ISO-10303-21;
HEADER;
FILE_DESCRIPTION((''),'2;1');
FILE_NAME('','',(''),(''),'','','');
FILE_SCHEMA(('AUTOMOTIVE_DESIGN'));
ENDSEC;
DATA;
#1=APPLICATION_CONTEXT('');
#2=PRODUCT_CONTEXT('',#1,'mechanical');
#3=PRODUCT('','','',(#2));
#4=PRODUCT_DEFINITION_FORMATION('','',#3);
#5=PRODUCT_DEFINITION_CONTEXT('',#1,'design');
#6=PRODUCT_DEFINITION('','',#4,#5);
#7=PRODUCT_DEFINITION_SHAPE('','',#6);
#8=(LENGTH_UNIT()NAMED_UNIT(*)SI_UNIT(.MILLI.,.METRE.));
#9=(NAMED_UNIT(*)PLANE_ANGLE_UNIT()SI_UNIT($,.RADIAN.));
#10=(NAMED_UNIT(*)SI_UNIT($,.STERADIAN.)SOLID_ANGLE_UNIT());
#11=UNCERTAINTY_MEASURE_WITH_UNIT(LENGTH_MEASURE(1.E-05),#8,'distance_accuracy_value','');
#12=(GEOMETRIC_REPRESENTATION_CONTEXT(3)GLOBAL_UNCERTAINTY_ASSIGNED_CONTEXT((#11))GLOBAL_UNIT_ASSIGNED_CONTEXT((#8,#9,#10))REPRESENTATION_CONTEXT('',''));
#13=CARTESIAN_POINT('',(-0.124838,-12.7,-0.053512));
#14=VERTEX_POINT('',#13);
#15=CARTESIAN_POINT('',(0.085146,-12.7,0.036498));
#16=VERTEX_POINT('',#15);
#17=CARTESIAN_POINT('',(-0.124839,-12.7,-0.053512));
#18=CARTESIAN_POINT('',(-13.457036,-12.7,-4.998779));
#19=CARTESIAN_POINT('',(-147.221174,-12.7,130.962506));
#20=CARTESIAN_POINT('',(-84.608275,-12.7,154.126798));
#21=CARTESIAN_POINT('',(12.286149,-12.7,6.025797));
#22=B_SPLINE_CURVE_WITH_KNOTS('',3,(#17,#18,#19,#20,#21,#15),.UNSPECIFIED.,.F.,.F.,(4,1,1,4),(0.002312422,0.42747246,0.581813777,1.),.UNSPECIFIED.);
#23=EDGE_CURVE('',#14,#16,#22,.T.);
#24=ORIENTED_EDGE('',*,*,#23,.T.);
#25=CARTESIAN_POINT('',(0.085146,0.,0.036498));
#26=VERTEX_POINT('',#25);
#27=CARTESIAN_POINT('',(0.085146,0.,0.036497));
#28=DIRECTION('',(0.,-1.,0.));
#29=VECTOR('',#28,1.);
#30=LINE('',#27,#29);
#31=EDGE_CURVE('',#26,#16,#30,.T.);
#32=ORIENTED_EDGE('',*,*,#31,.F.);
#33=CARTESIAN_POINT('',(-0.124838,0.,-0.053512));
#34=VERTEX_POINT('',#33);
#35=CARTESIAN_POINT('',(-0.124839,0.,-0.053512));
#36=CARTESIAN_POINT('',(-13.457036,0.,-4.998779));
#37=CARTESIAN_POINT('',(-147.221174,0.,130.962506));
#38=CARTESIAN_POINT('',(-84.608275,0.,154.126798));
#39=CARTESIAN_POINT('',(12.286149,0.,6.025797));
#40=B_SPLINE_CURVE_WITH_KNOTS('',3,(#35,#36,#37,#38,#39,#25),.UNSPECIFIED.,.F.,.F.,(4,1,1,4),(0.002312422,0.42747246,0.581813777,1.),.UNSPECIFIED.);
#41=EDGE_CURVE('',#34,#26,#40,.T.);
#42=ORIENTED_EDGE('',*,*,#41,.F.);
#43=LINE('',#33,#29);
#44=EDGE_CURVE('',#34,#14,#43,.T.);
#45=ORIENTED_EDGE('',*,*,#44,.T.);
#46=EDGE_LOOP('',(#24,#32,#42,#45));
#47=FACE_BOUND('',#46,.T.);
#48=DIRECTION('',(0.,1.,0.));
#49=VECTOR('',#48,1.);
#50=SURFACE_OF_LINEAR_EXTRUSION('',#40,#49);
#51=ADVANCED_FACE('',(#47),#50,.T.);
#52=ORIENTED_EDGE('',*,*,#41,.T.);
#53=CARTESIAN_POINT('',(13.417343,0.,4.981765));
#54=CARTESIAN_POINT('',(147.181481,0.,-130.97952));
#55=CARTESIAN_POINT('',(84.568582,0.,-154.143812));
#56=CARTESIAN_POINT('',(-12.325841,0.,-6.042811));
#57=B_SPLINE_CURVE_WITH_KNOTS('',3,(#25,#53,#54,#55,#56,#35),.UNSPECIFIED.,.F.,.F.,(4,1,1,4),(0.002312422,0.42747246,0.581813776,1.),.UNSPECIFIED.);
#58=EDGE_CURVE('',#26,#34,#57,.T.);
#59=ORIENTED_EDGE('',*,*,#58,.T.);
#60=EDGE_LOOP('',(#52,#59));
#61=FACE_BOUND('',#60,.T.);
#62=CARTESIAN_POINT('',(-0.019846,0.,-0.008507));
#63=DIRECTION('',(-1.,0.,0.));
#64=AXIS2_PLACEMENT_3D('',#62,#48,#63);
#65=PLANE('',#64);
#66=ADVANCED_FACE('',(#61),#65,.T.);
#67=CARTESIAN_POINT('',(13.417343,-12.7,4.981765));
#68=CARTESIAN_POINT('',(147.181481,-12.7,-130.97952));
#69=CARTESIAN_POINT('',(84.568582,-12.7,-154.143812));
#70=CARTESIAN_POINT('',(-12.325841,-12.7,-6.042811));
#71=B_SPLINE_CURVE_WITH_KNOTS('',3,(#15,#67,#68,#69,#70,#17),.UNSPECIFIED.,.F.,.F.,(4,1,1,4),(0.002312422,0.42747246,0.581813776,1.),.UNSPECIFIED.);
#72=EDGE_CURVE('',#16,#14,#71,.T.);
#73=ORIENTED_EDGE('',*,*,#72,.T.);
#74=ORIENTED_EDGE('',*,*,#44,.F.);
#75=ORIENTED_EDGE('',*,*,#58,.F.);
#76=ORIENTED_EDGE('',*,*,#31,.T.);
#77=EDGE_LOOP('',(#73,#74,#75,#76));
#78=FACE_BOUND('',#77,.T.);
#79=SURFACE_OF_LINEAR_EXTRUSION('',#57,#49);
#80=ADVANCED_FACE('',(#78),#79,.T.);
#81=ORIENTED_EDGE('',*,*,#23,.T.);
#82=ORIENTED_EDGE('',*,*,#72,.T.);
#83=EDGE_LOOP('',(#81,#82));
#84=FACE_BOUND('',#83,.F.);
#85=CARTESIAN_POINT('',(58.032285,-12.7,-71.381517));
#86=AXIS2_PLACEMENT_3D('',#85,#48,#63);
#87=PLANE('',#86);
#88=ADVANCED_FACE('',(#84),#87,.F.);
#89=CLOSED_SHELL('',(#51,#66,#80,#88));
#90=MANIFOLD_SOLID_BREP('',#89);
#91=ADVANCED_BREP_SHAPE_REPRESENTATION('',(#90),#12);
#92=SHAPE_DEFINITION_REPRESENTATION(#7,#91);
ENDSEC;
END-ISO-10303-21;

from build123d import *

# Parameters (mm, degrees)
F1_DEPTH = 12.7


# Not quite as in the source:
# - ends of sketch curves that miss each other by under 0.0002 mm in the source are joined


with BuildPart() as f1:
    # F0 (on Front) → F1 (new body)
    with BuildSketch(Plane.XZ):
        with BuildLine():
            add(Edge.make_bspline(
                [(0.0851461084, 0.0364977736), (13.4173432124, 4.981764724), (147.1814805715, -130.9795197626), (84.5685821352, -154.1438118144), (-12.3258406715, -6.0428114175), (-0.1248385092, -0.0535120943)],
                knots=[0.0023124215, 0.0023124215, 0.0023124215, 0.0023124215, 0.4274724605, 0.581813776, 1, 1, 1, 1], degree=3))
            add(Edge.make_bspline(
                [(0.0851461084, 0.0364977736), (0.0176790191, 0.003378732), (-0.0523253132, -0.0266154056), (-0.1248385092, -0.0535120943)],
                knots=[0, 0, 0, 0, 0.0023124215, 0.0023124215, 0.0023124215, 0.0023124215], degree=3))
        make_face()
        with BuildLine():
            add(Edge.make_bspline(
                [(-0.1248385092, -0.0535120943), (-0.0573712937, -0.0203933929), (0.0126330385, 0.0096007449), (0.0851461084, 0.0364977736)],
                knots=[0, 0, 0, 0, 0.0023124215, 0.0023124215, 0.0023124215, 0.0023124215], degree=3))
            add(Edge.make_bspline(
                [(-0.1248385092, -0.0535120943), (-13.4570356208, -4.9987794155), (-147.2211737889, 130.9625055247), (-84.608274516, 154.1267975242), (12.2861485254, 6.0257967738), (0.0851461084, 0.0364977736)],
                knots=[0.0023124215, 0.0023124215, 0.0023124215, 0.0023124215, 0.4274724602, 0.5818137766, 1, 1, 1, 1], degree=3))
        make_face()
        with BuildLine():
            add(Edge.make_bspline(
                [(0.0851462346, 0.0364974332), (0.0176790191, 0.003378732), (-0.0523253132, -0.0266154056), (-0.1248383831, -0.0535124342)],
                knots=[0, 0, 0, 0, 0.0023124215, 0.0023124215, 0.0023124215, 0.0023124215], degree=3))
            add(Edge.make_bspline(
                [(-0.1248383831, -0.0535124342), (-0.0573712937, -0.0203933929), (0.0126330385, 0.0096007449), (0.0851462346, 0.0364974332)],
                knots=[0, 0, 0, 0, 0.0023124215, 0.0023124215, 0.0023124215, 0.0023124215], degree=3))
        make_face()
    extrude(amount=F1_DEPTH)


solid = f1.part
